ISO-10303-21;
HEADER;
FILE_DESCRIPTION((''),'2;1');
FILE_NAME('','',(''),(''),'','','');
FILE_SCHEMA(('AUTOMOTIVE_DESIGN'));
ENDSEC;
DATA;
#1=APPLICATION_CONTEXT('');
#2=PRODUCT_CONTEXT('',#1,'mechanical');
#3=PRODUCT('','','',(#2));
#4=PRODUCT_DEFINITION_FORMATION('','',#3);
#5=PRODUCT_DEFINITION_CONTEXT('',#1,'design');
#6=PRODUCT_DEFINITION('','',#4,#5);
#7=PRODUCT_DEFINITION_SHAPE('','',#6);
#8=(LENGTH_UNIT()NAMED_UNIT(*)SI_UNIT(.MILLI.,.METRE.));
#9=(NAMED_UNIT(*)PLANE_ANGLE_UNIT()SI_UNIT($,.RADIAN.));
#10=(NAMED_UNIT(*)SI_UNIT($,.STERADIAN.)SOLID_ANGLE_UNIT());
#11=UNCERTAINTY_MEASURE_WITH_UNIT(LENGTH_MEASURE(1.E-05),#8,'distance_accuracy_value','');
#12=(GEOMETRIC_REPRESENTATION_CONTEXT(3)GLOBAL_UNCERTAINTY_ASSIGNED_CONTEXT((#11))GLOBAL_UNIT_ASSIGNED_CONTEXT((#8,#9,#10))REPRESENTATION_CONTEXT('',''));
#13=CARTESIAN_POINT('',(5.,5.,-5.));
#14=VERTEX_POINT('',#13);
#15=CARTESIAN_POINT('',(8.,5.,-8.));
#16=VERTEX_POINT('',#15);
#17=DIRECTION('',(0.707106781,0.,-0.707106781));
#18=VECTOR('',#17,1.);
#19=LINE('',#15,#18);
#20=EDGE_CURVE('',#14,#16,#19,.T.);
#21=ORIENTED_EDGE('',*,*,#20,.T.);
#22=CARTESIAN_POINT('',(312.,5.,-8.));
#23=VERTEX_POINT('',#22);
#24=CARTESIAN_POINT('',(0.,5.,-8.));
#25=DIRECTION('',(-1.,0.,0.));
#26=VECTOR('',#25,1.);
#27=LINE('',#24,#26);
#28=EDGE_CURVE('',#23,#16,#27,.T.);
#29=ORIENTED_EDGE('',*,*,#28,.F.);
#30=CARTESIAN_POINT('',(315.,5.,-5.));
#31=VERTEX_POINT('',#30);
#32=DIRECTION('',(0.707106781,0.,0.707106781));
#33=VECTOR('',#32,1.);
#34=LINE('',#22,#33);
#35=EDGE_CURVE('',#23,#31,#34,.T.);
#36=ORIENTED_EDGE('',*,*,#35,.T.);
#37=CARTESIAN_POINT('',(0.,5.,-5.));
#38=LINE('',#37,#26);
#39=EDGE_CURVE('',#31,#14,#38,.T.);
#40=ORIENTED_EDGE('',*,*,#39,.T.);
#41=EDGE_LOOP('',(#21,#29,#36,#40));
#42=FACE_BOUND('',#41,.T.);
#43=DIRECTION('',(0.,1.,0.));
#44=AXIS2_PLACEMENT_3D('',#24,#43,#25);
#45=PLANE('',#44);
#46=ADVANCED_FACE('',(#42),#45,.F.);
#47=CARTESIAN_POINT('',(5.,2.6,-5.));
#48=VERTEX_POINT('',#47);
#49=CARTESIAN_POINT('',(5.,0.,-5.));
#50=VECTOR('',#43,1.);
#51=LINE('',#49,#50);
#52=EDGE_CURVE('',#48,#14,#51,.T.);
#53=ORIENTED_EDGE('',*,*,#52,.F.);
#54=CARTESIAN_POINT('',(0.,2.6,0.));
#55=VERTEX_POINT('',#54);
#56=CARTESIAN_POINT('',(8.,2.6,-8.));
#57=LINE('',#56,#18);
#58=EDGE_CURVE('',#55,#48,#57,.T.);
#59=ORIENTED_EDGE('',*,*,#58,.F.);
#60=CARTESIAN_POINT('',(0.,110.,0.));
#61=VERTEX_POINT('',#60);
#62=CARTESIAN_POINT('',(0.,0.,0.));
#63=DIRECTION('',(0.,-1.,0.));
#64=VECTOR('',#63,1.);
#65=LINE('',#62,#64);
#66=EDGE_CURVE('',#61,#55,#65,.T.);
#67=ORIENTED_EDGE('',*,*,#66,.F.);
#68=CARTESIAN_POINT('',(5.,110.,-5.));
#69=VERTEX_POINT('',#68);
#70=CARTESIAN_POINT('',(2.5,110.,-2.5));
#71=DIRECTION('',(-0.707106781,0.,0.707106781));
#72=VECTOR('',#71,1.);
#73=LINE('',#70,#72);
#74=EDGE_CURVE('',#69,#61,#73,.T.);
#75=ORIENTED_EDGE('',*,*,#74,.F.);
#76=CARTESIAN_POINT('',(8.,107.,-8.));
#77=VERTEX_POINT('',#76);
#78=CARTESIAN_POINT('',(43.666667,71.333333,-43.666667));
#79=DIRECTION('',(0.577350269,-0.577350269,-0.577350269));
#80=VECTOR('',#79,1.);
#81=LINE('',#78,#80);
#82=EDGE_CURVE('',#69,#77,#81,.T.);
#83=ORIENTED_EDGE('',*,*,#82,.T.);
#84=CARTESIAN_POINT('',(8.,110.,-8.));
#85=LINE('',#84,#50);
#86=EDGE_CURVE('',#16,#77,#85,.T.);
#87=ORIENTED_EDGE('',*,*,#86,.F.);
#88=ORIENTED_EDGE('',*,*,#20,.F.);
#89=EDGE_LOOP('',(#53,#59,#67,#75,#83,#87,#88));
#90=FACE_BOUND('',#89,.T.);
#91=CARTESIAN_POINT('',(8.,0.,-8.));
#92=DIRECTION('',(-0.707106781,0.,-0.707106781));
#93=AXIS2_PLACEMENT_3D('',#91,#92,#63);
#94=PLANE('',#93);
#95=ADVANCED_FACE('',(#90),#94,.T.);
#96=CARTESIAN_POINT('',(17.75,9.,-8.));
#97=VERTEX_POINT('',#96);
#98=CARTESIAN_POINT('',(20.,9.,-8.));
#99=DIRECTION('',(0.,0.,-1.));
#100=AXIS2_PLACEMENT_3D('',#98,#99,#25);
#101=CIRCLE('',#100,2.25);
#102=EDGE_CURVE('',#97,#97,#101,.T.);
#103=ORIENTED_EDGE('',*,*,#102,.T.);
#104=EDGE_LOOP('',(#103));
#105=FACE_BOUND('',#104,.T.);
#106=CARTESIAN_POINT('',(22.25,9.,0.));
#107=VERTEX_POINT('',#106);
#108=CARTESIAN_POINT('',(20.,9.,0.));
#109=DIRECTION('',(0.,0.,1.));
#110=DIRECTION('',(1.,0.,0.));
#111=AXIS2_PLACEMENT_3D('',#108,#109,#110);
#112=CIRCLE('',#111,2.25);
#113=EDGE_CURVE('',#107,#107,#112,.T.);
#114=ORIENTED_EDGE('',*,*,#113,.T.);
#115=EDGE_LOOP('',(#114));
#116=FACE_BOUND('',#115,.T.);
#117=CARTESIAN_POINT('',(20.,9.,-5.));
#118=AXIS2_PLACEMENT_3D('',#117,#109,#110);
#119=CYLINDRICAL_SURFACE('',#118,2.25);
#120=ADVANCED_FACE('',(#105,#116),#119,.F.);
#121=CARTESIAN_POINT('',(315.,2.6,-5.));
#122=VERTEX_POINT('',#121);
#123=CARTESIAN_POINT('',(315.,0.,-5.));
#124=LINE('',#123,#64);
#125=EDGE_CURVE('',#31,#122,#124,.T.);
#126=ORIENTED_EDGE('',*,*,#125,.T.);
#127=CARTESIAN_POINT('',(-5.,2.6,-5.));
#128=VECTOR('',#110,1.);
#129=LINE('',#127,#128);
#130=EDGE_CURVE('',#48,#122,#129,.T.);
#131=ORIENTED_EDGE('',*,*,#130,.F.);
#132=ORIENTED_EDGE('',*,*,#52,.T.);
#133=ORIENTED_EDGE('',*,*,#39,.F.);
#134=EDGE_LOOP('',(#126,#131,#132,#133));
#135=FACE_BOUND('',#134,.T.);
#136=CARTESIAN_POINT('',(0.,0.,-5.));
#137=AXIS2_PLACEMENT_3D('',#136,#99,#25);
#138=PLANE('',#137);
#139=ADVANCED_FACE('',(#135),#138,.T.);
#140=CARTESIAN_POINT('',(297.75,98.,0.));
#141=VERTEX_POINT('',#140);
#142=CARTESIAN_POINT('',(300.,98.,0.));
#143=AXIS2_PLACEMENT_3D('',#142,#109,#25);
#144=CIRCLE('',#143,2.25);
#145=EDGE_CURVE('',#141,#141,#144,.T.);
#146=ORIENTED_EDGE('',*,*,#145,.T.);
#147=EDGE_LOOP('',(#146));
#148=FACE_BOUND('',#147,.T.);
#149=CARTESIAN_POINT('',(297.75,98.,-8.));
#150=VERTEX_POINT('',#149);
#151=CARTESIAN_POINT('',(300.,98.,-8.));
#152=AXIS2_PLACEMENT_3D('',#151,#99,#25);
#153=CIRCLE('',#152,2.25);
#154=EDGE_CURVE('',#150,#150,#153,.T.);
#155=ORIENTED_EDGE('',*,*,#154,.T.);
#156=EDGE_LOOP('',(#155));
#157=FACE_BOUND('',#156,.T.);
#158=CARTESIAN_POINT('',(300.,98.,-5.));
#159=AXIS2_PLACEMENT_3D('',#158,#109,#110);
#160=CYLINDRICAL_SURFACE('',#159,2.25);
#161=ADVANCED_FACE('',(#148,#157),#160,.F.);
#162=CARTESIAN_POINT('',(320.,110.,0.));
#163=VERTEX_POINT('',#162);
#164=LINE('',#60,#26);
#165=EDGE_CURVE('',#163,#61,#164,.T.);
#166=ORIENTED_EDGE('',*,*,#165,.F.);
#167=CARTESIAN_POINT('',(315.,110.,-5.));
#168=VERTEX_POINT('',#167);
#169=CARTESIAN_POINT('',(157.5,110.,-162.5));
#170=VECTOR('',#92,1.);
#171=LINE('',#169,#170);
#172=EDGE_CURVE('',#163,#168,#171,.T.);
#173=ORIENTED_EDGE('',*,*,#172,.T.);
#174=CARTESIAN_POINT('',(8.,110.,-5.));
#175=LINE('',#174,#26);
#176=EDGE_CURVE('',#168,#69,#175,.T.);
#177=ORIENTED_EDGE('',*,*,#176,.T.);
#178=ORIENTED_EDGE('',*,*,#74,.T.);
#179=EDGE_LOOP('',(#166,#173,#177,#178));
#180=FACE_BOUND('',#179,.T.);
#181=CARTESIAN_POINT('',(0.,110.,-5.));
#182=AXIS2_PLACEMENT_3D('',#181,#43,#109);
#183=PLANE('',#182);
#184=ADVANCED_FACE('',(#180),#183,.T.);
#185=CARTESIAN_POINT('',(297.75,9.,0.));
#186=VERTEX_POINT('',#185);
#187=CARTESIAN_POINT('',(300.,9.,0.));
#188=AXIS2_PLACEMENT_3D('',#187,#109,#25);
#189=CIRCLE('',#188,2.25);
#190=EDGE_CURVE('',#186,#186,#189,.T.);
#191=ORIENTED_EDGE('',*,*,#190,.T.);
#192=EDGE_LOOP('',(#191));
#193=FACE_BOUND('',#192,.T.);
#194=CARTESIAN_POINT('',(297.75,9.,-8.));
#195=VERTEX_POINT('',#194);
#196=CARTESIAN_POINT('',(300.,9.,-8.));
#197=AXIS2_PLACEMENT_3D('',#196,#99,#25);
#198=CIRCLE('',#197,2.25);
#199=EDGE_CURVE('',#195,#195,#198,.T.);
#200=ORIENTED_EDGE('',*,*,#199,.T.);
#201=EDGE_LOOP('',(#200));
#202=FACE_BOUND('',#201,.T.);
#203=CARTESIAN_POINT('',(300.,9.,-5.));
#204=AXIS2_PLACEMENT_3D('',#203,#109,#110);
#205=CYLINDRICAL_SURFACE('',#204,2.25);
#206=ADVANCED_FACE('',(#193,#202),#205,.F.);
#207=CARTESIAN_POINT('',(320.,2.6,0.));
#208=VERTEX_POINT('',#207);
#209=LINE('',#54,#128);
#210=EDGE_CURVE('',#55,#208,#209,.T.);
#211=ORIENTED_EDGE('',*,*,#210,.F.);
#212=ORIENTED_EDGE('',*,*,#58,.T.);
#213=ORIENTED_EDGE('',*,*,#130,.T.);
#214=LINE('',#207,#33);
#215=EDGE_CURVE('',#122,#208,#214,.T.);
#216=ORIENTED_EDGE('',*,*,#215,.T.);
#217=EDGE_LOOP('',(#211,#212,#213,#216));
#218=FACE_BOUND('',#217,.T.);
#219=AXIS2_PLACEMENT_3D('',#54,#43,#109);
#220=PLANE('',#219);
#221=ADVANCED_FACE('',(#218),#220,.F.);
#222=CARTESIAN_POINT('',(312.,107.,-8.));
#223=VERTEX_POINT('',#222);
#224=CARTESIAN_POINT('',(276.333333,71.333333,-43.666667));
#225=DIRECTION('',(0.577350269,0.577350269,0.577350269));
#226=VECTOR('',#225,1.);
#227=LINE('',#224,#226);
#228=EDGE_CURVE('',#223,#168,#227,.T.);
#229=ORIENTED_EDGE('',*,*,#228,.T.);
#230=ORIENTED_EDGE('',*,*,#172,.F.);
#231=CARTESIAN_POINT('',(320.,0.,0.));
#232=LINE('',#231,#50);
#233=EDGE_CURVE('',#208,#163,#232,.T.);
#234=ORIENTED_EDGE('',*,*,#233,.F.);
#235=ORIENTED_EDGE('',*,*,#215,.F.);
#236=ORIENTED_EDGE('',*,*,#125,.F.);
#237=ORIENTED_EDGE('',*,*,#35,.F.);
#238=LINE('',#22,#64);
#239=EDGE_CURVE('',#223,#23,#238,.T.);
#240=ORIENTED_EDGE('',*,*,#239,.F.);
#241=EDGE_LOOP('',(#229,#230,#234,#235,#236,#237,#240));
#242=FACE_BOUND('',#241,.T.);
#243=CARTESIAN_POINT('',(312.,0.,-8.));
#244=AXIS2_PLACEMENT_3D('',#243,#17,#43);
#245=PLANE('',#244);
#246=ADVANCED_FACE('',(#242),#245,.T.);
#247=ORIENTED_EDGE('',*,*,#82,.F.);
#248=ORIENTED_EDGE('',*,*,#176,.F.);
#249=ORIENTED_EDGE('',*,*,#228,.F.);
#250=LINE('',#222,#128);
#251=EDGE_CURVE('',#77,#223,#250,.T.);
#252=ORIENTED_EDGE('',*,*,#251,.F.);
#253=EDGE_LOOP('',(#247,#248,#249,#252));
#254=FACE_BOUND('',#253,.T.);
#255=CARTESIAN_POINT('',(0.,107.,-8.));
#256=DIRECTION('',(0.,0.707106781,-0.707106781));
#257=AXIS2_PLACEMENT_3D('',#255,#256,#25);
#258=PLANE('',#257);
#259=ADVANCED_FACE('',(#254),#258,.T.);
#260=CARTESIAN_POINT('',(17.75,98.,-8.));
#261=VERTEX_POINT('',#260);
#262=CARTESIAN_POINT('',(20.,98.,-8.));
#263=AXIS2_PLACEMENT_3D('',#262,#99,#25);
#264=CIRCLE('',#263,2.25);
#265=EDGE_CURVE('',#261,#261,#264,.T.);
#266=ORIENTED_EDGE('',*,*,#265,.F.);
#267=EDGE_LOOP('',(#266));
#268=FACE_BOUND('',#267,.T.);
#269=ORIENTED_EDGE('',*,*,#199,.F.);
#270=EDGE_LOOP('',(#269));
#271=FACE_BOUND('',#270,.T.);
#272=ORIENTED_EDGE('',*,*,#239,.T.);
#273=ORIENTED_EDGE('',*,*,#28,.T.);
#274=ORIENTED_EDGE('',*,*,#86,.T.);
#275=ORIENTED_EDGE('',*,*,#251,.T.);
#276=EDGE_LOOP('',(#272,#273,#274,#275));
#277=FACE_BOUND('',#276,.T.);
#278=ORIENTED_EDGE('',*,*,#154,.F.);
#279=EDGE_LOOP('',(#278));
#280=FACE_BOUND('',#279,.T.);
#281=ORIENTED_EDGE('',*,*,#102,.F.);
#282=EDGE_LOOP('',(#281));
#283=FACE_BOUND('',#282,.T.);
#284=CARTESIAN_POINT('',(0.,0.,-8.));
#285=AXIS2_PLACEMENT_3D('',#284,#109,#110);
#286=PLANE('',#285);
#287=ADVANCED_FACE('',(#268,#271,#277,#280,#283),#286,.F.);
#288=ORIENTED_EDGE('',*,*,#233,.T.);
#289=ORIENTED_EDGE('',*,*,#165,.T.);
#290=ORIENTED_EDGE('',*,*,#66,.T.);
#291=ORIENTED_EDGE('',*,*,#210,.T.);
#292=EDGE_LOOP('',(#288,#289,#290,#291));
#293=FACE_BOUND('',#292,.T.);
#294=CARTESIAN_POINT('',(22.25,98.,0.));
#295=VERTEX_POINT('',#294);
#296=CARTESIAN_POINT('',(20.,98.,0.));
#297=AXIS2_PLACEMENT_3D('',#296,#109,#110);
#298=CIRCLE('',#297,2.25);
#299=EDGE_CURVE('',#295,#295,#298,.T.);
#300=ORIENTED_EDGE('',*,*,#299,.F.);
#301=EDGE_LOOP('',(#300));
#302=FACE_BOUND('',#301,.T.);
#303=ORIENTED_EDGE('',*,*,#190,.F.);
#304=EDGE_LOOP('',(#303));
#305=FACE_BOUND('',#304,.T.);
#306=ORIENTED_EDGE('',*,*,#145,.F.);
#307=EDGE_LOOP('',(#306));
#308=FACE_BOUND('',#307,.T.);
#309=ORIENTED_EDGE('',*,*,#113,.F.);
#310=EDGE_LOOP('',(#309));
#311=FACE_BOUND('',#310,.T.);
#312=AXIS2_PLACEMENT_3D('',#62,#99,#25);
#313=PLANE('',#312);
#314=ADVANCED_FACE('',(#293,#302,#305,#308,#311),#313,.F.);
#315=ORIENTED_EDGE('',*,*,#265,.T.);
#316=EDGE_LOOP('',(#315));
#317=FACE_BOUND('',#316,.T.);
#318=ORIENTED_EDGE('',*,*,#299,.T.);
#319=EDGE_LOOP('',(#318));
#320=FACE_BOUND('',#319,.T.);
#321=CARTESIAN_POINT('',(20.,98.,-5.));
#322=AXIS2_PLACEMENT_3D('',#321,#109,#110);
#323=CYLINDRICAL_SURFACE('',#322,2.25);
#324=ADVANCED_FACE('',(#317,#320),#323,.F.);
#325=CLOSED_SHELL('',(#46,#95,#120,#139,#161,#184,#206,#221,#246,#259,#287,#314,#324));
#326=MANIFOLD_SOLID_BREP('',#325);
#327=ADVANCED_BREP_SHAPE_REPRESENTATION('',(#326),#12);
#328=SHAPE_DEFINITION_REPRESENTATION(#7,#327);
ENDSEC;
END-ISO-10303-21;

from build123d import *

# Parameters (mm, degrees)
SKETCH1_W           = 320
SKETCH1_H           = 110
SKETCH1_R           = 2.25
BOSS_EXTRUDE1_DEPTH = 5
SKETCH2_W           = 320
SKETCH2_H           = 105
SKETCH2_R           = 2.25
BOSS_EXTRUDE2_DEPTH = 3
CHAMFER1_SIZE       = 8
CHAMFER3_SIZE       = 3
SKETCH3_W           = 7.071067812
SKETCH3_H           = 2.6
CUT_EXTRUDE1_DEPTH  = 357.223151056


with BuildPart() as part:
    # Sketch1 → Boss-Extrude1 (new body)
    with BuildSketch(Plane.XY):
        with Locations((160, 55)):
            Rectangle(SKETCH1_W, SKETCH1_H)
        with Locations((20, 9)):
            Circle(SKETCH1_R, mode=Mode.SUBTRACT)
        with Locations(Location((300, 9, 0), (0, 0, 180))):
            Circle(SKETCH1_R, mode=Mode.SUBTRACT)
        with Locations((20, 98)):
            Circle(SKETCH1_R, mode=Mode.SUBTRACT)
        with Locations(Location((300, 98, 0), (0, 0, 180))):
            Circle(SKETCH1_R, mode=Mode.SUBTRACT)
    extrude(amount=-BOSS_EXTRUDE1_DEPTH)

    # Sketch2 → Boss-Extrude2 (add)
    with BuildSketch(Plane(origin=(0, 0, -5), x_dir=(-1, 0, 0), z_dir=(0, 0, -1))):
        with Locations((-160, 57.5)):
            Rectangle(SKETCH2_W, SKETCH2_H)
        with Locations(Location((-20, 9, 0), (0, 0, 180))):
            Circle(SKETCH2_R, mode=Mode.SUBTRACT)
        with Locations((-300, 9)):
            Circle(SKETCH2_R, mode=Mode.SUBTRACT)
        with Locations(Location((-20, 98, 0), (0, 0, 180))):
            Circle(SKETCH2_R, mode=Mode.SUBTRACT)
        with Locations((-300, 98)):
            Circle(SKETCH2_R, mode=Mode.SUBTRACT)
    extrude(amount=BOSS_EXTRUDE2_DEPTH)

    # Chamfer1
    # the kernel refuses this chamfer: 8 mm, written as the material it takes off along each edge
    with BuildSketch(Plane(origin=(320, -15.573463904, -8), x_dir=(-0.9996219169112968, 0, -0.0274958766105862), z_dir=(0, 1, 0)), Plane(origin=(0, 130.573463904, -8), x_dir=(0.9996219169112968, 0, -0.027495876610586275), z_dir=(0, -1, 0))) as chamfer1_piece_1:
        Polygon((CHAMFER1_SIZE * 0.999621916911, CHAMFER1_SIZE * 0.0274958766106), (-CHAMFER1_SIZE * 0.0274958766106, CHAMFER1_SIZE * 0.999621916911), (0, 0), align=None)
    extrude(amount=146.146927807, mode=Mode.SUBTRACT)

    # Chamfer3
    chamfer3_edges = [part.edges().sort_by_distance(p)[0] for p in [
        (160, 110, -8),
    ]]
    chamfer(chamfer3_edges, length=CHAMFER3_SIZE)

    # Sketch3 → Cut-Extrude1 (cut, through all, along a direction that is not the sketch's normal)
    with BuildSketch(Plane(origin=(160, 0, -160), x_dir=(-0.7071067811865452, 0, -0.7071067811865498), z_dir=(0.7071067811865498, 0, -0.7071067811865452))):
        with Locations((-222.738636074, 1.3)):
            Rectangle(SKETCH3_W, SKETCH3_H)
    extrude(amount=-CUT_EXTRUDE1_DEPTH, dir=(1, 0, 0), mode=Mode.SUBTRACT)


solid = part.part
